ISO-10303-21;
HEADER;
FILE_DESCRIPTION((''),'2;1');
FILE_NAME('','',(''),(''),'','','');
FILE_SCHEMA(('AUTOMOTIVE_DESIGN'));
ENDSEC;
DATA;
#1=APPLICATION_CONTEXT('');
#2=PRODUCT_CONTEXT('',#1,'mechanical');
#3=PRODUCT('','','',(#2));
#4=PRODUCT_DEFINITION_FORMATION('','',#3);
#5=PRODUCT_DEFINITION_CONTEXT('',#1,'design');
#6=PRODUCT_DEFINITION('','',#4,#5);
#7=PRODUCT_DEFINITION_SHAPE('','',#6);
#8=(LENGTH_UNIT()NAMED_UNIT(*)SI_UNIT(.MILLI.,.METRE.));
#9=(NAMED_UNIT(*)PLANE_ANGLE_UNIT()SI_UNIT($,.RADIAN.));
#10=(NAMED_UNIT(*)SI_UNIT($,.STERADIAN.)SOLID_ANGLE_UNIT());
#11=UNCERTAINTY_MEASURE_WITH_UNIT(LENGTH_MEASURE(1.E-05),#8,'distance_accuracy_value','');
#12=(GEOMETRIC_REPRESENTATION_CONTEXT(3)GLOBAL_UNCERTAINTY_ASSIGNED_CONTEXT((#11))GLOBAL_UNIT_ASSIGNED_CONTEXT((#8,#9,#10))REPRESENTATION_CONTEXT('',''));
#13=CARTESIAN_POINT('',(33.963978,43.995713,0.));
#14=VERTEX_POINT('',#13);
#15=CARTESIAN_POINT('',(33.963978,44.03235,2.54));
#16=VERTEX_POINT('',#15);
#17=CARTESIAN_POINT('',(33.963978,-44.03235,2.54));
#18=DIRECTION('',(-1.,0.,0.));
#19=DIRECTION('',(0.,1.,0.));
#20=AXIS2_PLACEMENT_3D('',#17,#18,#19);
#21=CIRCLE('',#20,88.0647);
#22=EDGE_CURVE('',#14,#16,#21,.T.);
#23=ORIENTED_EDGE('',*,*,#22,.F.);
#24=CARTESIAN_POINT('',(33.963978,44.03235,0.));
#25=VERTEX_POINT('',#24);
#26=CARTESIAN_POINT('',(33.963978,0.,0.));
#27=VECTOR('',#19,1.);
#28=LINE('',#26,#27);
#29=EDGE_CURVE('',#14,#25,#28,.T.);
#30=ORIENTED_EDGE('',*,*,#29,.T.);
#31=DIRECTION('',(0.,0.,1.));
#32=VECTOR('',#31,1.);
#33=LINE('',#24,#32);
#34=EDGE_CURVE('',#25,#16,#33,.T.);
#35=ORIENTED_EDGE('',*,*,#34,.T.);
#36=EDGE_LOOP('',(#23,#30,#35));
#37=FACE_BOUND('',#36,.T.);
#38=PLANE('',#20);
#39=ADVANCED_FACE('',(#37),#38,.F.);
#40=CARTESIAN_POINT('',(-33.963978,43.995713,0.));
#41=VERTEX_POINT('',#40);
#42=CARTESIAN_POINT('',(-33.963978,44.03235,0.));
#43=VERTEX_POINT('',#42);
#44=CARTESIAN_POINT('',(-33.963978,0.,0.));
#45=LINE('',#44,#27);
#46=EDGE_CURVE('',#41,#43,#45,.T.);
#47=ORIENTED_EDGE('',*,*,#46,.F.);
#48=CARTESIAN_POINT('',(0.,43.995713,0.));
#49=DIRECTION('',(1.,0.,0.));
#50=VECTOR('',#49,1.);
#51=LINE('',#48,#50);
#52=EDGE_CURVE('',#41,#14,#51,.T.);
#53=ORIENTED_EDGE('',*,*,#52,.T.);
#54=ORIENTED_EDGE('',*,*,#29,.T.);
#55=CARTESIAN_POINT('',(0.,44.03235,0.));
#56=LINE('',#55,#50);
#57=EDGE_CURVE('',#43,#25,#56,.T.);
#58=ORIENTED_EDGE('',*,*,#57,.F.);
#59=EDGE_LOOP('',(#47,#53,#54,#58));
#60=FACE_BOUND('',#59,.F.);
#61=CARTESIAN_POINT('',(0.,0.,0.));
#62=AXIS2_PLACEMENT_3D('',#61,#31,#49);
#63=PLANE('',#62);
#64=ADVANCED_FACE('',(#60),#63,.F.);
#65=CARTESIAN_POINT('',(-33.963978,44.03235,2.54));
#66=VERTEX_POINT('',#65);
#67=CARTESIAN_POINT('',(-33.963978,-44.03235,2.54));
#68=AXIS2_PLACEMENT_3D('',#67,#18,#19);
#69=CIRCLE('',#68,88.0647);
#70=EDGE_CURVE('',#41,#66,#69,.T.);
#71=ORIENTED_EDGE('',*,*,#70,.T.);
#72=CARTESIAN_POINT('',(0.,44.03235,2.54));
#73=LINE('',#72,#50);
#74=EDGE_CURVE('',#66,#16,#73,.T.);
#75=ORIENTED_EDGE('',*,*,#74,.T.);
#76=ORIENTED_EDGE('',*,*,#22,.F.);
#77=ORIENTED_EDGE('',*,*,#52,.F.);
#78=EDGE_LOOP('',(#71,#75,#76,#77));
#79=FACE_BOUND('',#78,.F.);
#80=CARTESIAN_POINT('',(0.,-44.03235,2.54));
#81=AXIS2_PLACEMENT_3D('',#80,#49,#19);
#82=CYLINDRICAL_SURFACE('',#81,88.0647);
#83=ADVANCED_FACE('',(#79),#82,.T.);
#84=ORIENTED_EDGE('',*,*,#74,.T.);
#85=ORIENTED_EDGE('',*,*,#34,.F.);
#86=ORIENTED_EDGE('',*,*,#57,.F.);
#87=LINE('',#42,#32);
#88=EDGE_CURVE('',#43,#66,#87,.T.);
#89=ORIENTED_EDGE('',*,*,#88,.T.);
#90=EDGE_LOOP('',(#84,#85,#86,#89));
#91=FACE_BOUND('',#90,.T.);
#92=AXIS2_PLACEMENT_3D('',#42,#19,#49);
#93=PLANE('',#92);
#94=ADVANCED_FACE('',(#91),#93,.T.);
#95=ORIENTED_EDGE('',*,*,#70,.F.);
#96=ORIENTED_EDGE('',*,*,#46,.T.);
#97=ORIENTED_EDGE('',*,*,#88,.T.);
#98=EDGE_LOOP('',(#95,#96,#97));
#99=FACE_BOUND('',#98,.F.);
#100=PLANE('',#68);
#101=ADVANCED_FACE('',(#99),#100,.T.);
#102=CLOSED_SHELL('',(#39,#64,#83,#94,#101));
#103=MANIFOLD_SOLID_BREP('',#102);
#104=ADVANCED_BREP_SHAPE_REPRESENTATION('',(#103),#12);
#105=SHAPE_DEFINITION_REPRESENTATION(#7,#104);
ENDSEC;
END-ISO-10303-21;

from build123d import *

# Parameters (mm, degrees)
F0_W      = 67.9279565811
F0_H      = 88.0647003651
F1_DEPTH  = 2.54
F1_FACE_W = 67.9279565811
F1_FACE_H = 88.0647003651


# Not quite as in the source:
# - a feature of the source that left no trace in its solid (it failed there, or was rolled back) is left out


with BuildPart() as f1:
    # F0 (on Top) → F1 (new body)
    with BuildSketch(Plane.XY):
        Rectangle(F0_W, F0_H)
    extrude(amount=F1_DEPTH)

    # F1_face (on face) → F2 (revolve)
    with BuildSketch(Plane.XY.offset(2.54)):
        Rectangle(F1_FACE_W, F1_FACE_H)
    revolve(axis=Axis((0, -44.0323501825, 2.54), (-1, 0, 0)))


solid = f1.part
